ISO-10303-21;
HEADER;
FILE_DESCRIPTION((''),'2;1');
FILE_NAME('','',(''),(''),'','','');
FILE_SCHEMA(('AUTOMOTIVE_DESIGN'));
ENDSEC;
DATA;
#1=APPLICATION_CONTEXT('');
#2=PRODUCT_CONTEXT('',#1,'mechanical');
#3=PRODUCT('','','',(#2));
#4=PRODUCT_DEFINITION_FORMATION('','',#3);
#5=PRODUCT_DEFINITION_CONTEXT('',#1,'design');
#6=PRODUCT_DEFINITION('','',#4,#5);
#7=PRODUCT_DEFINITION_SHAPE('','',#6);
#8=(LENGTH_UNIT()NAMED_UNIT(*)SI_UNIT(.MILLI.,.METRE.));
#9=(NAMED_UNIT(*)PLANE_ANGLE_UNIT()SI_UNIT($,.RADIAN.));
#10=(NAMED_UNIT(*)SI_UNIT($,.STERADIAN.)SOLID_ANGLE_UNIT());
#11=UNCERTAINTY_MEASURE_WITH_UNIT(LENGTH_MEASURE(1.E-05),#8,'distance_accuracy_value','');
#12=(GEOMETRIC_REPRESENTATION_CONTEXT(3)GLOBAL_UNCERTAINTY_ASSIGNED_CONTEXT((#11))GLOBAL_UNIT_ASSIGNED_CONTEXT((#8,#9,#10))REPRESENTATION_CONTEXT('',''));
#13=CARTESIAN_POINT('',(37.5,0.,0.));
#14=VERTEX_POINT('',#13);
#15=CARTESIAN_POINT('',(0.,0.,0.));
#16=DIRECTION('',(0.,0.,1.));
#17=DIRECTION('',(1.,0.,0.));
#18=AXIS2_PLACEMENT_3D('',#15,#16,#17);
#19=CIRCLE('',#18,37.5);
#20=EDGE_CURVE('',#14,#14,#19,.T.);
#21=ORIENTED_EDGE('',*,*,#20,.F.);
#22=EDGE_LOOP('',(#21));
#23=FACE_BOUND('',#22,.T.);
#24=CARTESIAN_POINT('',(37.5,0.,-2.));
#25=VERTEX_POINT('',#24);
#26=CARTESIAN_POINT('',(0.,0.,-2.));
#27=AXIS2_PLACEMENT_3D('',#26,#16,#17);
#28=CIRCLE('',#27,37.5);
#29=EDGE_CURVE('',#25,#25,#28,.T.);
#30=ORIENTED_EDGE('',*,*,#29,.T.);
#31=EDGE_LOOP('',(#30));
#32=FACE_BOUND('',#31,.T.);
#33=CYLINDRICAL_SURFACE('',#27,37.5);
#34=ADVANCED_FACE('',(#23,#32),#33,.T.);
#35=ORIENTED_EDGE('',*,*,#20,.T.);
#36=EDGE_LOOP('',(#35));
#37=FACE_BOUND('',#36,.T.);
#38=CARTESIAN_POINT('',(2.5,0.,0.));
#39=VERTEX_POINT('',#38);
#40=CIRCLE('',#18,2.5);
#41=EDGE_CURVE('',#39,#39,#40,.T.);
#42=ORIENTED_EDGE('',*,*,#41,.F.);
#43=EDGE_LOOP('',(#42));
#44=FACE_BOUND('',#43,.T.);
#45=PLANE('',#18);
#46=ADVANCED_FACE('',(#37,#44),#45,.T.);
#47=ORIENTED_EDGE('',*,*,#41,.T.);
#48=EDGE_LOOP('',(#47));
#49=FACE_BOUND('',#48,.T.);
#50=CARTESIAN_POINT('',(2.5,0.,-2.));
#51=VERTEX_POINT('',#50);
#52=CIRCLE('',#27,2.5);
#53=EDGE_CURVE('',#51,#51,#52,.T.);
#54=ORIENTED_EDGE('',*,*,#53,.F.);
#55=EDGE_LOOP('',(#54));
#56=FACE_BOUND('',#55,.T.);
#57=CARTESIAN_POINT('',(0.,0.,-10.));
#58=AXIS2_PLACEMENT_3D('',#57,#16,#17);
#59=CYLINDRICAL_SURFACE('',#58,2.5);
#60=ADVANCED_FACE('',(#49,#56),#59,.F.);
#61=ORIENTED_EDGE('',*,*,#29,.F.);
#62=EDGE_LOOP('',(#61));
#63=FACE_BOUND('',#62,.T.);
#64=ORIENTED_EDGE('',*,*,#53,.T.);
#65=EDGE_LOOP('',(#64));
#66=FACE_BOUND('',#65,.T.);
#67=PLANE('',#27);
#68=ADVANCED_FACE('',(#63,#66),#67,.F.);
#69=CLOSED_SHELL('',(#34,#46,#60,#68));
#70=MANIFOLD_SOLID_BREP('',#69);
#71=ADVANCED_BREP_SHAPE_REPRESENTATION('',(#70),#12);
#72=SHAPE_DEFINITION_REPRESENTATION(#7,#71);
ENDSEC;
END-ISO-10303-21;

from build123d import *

# Parameters (mm, degrees)
SKETCH1_R          = 37.5
BASE_FLANGE1_DEPTH = 2
SKETCH6_R          = 2.5
CUT_EXTRUDE1_DEPTH = 10


# Sheet-metal steps are written as plain solids
with BuildPart() as part:
    # Sketch1 → Base-Flange1 (new body)
    with BuildSketch(Plane.XY):
        Circle(SKETCH1_R)
    extrude(amount=-BASE_FLANGE1_DEPTH)

    # Sketch6 → Cut-Extrude1 (cut)
    with BuildSketch(Plane.XY):
        Circle(SKETCH6_R)
    extrude(amount=-CUT_EXTRUDE1_DEPTH, mode=Mode.SUBTRACT)


solid = part.part
